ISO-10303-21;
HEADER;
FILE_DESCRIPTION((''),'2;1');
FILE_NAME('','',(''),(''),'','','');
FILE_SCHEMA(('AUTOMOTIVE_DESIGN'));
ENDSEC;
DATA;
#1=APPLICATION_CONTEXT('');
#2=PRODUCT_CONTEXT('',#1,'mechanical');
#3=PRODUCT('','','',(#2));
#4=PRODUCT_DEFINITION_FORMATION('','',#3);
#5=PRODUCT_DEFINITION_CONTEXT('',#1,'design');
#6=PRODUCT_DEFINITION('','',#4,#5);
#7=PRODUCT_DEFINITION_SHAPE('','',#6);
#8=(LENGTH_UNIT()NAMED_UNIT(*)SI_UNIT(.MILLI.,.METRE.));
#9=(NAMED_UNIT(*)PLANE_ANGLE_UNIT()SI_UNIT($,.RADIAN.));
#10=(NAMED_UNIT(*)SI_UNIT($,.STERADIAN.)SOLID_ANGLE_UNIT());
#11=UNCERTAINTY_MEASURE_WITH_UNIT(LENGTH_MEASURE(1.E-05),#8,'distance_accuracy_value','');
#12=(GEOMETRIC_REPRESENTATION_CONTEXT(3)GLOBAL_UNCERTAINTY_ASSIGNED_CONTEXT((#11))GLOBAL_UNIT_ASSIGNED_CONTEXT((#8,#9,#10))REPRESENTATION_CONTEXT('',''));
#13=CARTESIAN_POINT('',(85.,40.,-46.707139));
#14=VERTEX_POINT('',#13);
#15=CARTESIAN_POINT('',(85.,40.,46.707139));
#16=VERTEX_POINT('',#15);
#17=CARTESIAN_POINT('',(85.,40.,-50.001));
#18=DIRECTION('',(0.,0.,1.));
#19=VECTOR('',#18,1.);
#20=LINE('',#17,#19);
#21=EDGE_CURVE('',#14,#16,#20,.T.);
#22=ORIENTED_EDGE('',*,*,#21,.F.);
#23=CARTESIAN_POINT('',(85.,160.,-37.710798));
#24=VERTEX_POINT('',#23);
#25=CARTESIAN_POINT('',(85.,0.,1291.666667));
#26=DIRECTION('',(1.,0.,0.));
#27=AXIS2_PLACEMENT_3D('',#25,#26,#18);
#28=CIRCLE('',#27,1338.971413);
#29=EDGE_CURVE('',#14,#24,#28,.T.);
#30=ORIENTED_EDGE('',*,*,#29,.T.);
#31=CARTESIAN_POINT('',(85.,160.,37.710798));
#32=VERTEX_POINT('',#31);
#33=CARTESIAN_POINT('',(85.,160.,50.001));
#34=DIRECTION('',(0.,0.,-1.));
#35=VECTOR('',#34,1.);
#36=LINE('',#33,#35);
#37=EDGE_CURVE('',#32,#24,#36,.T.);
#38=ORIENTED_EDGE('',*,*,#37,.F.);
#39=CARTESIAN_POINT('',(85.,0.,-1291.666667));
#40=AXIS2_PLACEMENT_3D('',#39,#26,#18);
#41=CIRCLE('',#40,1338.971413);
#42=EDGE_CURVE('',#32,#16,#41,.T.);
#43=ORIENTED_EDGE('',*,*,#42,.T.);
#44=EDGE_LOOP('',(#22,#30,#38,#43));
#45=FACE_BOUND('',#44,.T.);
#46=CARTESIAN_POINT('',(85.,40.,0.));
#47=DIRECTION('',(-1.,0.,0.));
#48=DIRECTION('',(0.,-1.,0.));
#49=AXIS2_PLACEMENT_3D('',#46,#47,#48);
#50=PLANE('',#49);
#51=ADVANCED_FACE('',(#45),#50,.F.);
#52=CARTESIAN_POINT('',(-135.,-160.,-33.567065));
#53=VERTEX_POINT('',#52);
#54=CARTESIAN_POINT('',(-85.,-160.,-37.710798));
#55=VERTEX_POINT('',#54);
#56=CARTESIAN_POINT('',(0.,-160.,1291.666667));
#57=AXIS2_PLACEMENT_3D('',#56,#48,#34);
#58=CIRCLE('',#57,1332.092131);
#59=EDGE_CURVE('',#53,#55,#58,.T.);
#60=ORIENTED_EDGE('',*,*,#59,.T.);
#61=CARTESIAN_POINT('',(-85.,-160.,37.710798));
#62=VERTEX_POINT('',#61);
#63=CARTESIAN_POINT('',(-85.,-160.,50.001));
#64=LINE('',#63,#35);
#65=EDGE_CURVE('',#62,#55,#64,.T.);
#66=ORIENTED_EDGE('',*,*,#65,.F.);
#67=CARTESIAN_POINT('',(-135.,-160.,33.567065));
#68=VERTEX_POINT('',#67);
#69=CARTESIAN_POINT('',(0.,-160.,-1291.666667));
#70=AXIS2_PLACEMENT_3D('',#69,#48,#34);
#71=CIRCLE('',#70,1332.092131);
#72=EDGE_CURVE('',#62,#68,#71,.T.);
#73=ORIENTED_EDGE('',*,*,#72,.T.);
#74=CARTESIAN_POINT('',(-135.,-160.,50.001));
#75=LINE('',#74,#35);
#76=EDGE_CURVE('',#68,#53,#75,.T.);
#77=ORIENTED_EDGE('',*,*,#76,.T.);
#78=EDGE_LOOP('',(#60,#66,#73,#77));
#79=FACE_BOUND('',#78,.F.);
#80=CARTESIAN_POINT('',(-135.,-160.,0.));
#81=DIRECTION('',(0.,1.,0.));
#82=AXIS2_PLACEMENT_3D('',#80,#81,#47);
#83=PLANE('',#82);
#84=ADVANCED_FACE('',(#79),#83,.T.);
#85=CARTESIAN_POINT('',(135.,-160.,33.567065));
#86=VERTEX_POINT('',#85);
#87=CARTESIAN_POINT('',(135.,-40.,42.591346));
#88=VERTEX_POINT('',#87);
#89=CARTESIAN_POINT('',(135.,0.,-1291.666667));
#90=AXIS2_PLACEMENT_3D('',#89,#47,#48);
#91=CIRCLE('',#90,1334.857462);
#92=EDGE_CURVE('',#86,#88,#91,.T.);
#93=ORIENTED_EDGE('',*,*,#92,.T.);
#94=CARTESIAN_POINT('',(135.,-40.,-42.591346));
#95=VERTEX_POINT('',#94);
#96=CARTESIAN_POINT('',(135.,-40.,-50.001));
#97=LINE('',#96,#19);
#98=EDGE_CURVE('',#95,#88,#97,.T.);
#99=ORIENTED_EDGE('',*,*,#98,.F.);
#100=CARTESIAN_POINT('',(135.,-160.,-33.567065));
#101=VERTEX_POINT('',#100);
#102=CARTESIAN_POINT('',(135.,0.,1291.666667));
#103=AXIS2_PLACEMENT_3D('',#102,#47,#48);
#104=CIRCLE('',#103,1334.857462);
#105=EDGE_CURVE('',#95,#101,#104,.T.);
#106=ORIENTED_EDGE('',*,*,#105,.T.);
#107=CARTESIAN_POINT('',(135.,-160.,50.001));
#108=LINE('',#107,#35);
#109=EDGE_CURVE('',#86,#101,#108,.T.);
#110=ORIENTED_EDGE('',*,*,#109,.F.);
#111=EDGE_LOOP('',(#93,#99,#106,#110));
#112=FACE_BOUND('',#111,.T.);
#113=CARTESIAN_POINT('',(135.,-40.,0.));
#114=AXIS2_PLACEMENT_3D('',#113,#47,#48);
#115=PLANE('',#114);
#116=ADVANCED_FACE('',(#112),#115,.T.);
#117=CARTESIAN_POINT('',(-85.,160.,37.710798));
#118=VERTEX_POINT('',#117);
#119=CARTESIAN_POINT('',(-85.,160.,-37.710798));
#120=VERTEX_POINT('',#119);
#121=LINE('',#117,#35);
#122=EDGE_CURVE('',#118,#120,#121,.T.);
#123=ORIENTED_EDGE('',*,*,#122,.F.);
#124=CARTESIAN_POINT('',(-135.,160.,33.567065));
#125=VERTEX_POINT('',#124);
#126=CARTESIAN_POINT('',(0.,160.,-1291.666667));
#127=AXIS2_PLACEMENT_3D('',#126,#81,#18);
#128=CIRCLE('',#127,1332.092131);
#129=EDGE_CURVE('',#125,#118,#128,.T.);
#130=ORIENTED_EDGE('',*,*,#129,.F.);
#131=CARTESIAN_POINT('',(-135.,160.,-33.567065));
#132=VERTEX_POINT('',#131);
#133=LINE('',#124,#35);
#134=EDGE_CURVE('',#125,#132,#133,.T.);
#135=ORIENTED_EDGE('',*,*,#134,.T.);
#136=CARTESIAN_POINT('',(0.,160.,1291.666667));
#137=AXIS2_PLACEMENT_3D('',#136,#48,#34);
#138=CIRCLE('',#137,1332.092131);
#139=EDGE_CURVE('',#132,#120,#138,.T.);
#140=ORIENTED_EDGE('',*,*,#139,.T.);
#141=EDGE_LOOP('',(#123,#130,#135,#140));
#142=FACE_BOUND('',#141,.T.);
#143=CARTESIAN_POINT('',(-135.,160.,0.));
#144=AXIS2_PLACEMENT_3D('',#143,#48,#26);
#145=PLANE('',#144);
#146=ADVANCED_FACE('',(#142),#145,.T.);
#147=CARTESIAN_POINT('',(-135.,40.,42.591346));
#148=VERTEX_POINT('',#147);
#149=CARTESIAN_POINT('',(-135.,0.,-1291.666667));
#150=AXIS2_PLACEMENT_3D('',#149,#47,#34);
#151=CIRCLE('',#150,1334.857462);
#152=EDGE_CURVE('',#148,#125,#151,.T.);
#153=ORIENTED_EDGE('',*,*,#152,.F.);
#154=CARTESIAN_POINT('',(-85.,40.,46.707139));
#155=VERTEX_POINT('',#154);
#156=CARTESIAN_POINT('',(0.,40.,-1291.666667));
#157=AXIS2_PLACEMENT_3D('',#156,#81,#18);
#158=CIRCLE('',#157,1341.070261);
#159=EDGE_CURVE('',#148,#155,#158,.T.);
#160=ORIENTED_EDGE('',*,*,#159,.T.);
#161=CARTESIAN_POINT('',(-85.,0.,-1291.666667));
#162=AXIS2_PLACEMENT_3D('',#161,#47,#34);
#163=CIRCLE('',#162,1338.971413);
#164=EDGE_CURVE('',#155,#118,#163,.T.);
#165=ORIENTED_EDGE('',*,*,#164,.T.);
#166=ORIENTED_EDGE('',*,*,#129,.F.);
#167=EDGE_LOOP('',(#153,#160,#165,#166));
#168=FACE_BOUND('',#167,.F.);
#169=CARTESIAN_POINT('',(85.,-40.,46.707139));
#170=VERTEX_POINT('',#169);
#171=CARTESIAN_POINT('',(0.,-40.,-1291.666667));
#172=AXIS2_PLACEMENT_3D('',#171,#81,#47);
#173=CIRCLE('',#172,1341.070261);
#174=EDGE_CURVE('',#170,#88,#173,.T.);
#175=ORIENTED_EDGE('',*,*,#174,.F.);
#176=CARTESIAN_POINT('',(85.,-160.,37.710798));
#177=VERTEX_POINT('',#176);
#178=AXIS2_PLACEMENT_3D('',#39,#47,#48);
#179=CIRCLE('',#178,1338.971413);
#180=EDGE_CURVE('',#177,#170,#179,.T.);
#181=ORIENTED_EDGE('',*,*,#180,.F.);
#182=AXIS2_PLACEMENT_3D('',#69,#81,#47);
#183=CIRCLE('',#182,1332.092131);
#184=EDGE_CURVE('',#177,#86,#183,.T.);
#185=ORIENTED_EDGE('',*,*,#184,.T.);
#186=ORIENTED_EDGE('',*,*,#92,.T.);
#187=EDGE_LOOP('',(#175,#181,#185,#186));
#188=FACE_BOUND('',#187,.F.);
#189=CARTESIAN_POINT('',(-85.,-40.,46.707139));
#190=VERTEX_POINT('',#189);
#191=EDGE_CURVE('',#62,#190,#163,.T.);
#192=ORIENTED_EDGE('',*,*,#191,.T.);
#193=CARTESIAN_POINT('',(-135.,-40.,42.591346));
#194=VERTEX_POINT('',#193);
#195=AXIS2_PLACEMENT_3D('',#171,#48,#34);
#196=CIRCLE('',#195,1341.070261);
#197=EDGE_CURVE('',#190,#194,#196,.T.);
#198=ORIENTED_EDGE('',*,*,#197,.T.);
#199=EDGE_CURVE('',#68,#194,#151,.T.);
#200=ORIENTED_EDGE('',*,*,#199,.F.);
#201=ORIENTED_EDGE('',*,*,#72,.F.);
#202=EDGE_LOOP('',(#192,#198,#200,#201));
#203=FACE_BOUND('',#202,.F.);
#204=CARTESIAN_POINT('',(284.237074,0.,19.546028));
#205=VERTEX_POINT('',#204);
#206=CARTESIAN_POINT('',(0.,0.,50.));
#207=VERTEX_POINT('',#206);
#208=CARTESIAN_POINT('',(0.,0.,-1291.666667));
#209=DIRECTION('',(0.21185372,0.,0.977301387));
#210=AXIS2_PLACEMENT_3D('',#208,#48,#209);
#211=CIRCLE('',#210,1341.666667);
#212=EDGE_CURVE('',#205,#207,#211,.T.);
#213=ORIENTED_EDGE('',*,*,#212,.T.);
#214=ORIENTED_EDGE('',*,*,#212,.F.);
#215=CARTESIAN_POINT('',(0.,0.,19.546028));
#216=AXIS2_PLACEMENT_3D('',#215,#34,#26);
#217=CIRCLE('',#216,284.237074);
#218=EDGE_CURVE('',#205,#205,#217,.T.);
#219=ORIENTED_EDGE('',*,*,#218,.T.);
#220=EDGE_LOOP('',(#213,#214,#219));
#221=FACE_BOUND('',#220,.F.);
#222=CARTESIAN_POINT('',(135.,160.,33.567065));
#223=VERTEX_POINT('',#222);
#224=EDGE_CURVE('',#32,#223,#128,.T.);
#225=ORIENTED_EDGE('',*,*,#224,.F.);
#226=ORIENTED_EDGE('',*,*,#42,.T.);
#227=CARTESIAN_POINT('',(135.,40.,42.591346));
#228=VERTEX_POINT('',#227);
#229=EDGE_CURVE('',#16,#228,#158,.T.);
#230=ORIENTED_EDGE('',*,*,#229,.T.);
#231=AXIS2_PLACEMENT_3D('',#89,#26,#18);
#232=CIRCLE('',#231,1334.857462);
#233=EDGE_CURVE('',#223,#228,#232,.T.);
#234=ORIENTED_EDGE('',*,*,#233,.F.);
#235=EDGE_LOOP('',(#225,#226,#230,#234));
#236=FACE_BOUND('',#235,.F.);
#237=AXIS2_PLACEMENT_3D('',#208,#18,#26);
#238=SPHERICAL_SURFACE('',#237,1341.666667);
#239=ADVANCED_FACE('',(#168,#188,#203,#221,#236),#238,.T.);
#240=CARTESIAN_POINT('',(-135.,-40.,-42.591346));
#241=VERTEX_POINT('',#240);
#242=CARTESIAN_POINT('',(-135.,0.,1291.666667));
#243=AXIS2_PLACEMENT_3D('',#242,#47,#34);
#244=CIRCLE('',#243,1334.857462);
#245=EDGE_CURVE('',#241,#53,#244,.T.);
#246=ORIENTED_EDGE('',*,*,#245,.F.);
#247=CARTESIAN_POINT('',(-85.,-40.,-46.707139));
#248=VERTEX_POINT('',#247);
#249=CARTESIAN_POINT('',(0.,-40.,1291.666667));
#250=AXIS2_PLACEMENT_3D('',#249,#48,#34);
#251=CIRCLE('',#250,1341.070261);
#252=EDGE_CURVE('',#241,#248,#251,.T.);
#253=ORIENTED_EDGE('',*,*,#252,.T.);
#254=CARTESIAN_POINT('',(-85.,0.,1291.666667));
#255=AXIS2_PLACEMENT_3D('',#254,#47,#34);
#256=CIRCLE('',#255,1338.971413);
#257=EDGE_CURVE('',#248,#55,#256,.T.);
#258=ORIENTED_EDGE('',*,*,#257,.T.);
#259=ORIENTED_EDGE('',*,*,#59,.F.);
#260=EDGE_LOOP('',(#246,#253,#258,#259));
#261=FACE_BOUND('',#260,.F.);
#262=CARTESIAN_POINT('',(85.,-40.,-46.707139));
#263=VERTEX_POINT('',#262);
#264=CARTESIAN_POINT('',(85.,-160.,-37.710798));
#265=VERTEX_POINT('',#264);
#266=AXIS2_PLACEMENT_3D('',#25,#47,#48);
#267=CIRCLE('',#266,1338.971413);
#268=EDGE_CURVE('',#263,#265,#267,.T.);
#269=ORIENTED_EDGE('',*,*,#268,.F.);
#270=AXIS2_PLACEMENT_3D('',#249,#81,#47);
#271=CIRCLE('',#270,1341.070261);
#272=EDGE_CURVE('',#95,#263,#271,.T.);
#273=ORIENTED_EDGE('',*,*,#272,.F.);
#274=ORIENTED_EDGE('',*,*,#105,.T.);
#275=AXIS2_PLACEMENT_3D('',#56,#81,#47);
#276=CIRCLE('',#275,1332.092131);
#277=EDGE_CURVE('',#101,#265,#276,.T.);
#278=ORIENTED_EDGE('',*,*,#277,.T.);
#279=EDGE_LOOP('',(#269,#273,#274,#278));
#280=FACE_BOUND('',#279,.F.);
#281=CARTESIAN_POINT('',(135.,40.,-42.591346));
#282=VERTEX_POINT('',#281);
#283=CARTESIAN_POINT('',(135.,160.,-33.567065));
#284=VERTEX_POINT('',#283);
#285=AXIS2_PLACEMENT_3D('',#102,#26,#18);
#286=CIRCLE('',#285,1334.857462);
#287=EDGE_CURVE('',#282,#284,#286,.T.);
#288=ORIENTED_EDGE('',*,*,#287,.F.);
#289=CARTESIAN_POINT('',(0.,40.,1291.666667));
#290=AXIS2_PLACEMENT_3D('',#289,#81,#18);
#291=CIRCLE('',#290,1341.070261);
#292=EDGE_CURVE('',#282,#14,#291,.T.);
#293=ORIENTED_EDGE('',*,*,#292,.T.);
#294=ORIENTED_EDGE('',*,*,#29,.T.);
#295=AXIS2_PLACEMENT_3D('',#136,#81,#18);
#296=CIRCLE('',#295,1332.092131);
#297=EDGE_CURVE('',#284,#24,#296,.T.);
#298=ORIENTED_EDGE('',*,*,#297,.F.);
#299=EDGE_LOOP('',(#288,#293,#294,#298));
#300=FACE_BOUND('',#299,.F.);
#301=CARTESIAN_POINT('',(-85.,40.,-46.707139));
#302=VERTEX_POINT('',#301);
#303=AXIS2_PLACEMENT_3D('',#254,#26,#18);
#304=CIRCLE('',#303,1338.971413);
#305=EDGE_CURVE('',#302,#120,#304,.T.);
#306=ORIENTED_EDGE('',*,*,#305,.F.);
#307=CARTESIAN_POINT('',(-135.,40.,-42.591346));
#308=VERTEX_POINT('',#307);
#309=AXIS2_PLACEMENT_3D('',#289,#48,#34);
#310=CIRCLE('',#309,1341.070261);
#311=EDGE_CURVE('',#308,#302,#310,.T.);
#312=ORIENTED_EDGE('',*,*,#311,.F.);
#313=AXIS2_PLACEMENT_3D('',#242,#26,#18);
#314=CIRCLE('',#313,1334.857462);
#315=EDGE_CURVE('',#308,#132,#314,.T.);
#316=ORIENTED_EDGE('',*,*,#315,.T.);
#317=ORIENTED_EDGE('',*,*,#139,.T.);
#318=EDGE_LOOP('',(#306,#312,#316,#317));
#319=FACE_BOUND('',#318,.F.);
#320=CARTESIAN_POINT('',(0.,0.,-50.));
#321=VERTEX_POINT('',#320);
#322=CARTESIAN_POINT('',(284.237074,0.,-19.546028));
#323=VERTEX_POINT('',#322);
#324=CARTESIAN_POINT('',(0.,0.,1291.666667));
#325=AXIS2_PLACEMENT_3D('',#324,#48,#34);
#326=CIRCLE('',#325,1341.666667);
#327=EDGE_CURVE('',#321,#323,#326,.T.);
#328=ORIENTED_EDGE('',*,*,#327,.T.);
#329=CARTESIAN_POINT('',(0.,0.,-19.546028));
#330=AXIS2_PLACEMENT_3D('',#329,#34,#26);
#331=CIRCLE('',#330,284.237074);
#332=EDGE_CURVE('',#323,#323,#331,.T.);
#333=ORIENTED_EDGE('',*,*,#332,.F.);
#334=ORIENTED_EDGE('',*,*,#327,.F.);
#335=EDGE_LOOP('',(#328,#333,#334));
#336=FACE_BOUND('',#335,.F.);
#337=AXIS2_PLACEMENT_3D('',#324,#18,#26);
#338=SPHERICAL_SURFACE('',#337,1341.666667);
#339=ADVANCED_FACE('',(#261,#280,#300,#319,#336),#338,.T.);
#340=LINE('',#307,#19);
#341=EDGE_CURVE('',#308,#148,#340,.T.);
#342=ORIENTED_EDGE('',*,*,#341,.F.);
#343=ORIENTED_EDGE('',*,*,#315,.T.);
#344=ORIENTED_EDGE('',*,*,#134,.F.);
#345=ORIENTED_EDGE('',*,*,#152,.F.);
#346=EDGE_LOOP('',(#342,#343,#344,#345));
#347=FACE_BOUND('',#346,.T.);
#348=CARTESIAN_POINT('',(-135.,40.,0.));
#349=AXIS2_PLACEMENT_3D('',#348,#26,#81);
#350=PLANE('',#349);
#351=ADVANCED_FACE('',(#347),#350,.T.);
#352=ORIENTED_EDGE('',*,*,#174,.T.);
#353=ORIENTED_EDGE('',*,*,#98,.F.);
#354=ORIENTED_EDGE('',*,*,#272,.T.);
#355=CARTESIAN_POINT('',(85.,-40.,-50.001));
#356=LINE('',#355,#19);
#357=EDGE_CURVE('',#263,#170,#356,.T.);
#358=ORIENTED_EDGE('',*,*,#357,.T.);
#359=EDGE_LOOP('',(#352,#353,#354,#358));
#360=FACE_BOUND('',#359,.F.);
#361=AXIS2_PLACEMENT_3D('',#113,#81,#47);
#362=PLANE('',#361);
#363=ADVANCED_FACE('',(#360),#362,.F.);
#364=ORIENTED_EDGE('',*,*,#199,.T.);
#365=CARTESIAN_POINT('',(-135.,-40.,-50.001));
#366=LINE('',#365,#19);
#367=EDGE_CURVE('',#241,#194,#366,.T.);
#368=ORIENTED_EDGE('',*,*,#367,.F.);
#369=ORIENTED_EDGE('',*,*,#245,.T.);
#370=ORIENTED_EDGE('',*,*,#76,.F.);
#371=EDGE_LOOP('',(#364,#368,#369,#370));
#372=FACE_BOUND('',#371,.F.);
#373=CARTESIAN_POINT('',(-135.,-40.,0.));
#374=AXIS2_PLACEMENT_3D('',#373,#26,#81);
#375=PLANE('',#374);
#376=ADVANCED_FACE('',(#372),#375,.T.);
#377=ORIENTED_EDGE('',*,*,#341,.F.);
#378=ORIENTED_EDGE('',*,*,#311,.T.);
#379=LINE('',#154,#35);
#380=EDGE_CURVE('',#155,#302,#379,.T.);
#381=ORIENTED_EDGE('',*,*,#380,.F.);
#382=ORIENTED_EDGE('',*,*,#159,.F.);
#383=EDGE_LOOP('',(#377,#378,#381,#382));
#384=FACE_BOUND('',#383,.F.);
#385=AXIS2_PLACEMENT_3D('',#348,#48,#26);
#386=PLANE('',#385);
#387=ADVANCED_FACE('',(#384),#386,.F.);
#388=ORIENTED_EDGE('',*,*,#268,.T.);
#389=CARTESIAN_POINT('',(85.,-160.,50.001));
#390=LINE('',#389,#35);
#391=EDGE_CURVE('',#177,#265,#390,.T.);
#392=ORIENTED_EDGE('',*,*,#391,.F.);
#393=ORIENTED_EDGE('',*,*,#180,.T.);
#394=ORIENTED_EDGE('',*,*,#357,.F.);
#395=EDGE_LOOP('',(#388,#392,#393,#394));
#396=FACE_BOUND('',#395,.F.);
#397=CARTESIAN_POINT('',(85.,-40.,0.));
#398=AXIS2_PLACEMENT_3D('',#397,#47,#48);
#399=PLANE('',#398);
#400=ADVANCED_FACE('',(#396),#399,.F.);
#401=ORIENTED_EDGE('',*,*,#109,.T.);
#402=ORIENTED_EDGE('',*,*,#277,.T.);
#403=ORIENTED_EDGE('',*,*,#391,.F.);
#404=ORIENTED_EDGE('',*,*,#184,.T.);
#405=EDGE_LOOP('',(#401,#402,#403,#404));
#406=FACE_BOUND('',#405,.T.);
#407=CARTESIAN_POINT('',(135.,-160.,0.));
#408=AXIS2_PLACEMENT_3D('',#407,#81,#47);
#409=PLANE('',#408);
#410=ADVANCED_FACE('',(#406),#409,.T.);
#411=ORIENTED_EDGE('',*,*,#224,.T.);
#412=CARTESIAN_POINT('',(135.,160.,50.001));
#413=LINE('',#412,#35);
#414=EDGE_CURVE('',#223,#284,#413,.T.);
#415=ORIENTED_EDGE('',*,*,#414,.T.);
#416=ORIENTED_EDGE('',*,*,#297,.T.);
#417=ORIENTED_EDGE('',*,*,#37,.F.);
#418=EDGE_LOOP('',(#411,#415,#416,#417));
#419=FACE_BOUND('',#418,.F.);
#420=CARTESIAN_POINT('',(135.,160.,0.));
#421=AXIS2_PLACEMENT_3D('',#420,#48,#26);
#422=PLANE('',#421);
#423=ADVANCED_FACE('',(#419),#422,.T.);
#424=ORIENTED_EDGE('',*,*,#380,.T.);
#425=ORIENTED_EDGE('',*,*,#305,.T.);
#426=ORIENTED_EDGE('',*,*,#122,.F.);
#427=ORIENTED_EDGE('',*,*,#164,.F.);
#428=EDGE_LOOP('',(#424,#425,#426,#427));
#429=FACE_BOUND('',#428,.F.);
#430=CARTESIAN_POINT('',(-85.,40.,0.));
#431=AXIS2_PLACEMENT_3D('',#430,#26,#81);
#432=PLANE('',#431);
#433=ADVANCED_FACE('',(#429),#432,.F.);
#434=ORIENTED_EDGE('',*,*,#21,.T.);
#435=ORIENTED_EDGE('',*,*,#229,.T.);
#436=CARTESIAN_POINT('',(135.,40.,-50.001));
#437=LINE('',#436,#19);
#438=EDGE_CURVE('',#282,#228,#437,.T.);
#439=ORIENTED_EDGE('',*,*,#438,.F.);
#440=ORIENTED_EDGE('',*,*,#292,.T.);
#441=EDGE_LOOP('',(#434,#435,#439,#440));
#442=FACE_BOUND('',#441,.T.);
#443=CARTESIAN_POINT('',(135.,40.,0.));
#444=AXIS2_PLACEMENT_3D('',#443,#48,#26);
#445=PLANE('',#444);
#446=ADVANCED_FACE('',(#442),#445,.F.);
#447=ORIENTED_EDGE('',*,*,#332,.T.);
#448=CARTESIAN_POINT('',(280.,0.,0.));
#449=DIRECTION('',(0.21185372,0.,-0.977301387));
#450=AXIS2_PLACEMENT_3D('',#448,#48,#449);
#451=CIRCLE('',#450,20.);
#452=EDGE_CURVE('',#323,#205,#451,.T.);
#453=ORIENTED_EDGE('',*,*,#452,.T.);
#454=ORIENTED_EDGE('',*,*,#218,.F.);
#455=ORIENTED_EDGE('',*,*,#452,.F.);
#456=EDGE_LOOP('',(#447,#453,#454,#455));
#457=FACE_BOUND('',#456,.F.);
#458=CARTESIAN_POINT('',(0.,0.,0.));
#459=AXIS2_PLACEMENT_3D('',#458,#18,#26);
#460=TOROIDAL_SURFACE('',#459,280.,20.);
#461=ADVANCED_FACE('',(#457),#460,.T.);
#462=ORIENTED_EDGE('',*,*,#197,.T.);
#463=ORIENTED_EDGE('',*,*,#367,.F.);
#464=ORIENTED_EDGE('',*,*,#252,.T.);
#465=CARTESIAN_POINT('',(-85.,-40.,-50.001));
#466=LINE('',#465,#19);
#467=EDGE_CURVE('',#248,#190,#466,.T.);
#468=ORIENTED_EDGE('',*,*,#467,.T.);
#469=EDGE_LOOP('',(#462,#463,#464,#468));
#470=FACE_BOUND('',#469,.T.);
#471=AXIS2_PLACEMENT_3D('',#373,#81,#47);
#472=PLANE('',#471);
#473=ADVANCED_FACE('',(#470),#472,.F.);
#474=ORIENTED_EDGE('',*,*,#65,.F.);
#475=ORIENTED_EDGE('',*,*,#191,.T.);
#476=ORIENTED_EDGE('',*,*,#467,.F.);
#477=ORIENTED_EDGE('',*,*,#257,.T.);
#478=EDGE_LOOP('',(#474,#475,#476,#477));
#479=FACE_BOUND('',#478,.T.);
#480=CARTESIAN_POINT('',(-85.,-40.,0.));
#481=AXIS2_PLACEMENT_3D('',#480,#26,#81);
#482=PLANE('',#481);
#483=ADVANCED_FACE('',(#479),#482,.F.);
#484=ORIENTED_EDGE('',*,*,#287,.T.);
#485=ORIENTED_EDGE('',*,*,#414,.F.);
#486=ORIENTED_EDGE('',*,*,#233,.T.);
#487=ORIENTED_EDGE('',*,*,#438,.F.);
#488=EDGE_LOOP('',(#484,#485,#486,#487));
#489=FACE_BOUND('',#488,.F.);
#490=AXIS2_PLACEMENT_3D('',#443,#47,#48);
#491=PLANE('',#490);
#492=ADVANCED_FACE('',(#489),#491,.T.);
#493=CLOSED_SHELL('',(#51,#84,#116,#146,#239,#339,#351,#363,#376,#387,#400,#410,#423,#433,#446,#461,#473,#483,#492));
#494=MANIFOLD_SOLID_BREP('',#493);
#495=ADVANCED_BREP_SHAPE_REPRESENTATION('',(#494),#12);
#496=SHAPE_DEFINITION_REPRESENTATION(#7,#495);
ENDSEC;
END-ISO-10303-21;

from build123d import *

# Parameters (mm, degrees)
F2_W             = 50
F2_H             = 120
F3_DEPTH         = 50.001
F3_DEPTH_BACK    = 50.001
F3_COPIES2_COUNT = 2


# Not quite as in the source:
# - a pattern or mirror of a feature is missing from the dataset's text; its kind, count and spacing are read off the source's solid


with BuildPart() as f1:
    # F0 (on Front) → F1 (revolve)
    with BuildSketch(Plane.XZ):
        with BuildLine():
            ThreePointArc((284.237074401, -19.5460277427), (300, 0), (284.237074401, 19.5460277427))
            ThreePointArc((284.237074401, 19.5460277427), (142.931940876, 42.3647815091), (0, 50))
            Line((0, 50), (0, -50))
            ThreePointArc((0, -50), (142.931940876, -42.3647815091), (284.237074401, -19.5460277428))
        make_face()
    revolve(axis=Axis((0, 0, 0), (0, 0, -1)))

    # F2 (on Top) → F3 (cut, two sides)
    with BuildSketch(Plane.XY) as f3_sk:
        with Locations((-110, 100)):
            Rectangle(F2_W, F2_H)
    f3 = extrude(amount=-F3_DEPTH, mode=Mode.SUBTRACT) + extrude(f3_sk.sketch, amount=F3_DEPTH_BACK, mode=Mode.SUBTRACT)

    # F3_copies: F3 across plane
    add(f3.mirror(Plane(origin=(0, 0, 0), x_dir=(0, 0, 1), z_dir=(1, 0, 0))), mode=Mode.SUBTRACT)

    # F3_copies1: F3 across plane
    add(f3.mirror(Plane(origin=(0, 0, 0), x_dir=(0, 0, -1), z_dir=(0, -1, 0))), mode=Mode.SUBTRACT)

    # F3_copies2: F3 ×2 about axis
    f3_copies2_axis = Axis((0, 0, 0), (0, 0, 1))
    for i in range(1, F3_COPIES2_COUNT):
        add(f3.rotate(f3_copies2_axis, i * 360 / F3_COPIES2_COUNT), mode=Mode.SUBTRACT)


solid = f1.part
